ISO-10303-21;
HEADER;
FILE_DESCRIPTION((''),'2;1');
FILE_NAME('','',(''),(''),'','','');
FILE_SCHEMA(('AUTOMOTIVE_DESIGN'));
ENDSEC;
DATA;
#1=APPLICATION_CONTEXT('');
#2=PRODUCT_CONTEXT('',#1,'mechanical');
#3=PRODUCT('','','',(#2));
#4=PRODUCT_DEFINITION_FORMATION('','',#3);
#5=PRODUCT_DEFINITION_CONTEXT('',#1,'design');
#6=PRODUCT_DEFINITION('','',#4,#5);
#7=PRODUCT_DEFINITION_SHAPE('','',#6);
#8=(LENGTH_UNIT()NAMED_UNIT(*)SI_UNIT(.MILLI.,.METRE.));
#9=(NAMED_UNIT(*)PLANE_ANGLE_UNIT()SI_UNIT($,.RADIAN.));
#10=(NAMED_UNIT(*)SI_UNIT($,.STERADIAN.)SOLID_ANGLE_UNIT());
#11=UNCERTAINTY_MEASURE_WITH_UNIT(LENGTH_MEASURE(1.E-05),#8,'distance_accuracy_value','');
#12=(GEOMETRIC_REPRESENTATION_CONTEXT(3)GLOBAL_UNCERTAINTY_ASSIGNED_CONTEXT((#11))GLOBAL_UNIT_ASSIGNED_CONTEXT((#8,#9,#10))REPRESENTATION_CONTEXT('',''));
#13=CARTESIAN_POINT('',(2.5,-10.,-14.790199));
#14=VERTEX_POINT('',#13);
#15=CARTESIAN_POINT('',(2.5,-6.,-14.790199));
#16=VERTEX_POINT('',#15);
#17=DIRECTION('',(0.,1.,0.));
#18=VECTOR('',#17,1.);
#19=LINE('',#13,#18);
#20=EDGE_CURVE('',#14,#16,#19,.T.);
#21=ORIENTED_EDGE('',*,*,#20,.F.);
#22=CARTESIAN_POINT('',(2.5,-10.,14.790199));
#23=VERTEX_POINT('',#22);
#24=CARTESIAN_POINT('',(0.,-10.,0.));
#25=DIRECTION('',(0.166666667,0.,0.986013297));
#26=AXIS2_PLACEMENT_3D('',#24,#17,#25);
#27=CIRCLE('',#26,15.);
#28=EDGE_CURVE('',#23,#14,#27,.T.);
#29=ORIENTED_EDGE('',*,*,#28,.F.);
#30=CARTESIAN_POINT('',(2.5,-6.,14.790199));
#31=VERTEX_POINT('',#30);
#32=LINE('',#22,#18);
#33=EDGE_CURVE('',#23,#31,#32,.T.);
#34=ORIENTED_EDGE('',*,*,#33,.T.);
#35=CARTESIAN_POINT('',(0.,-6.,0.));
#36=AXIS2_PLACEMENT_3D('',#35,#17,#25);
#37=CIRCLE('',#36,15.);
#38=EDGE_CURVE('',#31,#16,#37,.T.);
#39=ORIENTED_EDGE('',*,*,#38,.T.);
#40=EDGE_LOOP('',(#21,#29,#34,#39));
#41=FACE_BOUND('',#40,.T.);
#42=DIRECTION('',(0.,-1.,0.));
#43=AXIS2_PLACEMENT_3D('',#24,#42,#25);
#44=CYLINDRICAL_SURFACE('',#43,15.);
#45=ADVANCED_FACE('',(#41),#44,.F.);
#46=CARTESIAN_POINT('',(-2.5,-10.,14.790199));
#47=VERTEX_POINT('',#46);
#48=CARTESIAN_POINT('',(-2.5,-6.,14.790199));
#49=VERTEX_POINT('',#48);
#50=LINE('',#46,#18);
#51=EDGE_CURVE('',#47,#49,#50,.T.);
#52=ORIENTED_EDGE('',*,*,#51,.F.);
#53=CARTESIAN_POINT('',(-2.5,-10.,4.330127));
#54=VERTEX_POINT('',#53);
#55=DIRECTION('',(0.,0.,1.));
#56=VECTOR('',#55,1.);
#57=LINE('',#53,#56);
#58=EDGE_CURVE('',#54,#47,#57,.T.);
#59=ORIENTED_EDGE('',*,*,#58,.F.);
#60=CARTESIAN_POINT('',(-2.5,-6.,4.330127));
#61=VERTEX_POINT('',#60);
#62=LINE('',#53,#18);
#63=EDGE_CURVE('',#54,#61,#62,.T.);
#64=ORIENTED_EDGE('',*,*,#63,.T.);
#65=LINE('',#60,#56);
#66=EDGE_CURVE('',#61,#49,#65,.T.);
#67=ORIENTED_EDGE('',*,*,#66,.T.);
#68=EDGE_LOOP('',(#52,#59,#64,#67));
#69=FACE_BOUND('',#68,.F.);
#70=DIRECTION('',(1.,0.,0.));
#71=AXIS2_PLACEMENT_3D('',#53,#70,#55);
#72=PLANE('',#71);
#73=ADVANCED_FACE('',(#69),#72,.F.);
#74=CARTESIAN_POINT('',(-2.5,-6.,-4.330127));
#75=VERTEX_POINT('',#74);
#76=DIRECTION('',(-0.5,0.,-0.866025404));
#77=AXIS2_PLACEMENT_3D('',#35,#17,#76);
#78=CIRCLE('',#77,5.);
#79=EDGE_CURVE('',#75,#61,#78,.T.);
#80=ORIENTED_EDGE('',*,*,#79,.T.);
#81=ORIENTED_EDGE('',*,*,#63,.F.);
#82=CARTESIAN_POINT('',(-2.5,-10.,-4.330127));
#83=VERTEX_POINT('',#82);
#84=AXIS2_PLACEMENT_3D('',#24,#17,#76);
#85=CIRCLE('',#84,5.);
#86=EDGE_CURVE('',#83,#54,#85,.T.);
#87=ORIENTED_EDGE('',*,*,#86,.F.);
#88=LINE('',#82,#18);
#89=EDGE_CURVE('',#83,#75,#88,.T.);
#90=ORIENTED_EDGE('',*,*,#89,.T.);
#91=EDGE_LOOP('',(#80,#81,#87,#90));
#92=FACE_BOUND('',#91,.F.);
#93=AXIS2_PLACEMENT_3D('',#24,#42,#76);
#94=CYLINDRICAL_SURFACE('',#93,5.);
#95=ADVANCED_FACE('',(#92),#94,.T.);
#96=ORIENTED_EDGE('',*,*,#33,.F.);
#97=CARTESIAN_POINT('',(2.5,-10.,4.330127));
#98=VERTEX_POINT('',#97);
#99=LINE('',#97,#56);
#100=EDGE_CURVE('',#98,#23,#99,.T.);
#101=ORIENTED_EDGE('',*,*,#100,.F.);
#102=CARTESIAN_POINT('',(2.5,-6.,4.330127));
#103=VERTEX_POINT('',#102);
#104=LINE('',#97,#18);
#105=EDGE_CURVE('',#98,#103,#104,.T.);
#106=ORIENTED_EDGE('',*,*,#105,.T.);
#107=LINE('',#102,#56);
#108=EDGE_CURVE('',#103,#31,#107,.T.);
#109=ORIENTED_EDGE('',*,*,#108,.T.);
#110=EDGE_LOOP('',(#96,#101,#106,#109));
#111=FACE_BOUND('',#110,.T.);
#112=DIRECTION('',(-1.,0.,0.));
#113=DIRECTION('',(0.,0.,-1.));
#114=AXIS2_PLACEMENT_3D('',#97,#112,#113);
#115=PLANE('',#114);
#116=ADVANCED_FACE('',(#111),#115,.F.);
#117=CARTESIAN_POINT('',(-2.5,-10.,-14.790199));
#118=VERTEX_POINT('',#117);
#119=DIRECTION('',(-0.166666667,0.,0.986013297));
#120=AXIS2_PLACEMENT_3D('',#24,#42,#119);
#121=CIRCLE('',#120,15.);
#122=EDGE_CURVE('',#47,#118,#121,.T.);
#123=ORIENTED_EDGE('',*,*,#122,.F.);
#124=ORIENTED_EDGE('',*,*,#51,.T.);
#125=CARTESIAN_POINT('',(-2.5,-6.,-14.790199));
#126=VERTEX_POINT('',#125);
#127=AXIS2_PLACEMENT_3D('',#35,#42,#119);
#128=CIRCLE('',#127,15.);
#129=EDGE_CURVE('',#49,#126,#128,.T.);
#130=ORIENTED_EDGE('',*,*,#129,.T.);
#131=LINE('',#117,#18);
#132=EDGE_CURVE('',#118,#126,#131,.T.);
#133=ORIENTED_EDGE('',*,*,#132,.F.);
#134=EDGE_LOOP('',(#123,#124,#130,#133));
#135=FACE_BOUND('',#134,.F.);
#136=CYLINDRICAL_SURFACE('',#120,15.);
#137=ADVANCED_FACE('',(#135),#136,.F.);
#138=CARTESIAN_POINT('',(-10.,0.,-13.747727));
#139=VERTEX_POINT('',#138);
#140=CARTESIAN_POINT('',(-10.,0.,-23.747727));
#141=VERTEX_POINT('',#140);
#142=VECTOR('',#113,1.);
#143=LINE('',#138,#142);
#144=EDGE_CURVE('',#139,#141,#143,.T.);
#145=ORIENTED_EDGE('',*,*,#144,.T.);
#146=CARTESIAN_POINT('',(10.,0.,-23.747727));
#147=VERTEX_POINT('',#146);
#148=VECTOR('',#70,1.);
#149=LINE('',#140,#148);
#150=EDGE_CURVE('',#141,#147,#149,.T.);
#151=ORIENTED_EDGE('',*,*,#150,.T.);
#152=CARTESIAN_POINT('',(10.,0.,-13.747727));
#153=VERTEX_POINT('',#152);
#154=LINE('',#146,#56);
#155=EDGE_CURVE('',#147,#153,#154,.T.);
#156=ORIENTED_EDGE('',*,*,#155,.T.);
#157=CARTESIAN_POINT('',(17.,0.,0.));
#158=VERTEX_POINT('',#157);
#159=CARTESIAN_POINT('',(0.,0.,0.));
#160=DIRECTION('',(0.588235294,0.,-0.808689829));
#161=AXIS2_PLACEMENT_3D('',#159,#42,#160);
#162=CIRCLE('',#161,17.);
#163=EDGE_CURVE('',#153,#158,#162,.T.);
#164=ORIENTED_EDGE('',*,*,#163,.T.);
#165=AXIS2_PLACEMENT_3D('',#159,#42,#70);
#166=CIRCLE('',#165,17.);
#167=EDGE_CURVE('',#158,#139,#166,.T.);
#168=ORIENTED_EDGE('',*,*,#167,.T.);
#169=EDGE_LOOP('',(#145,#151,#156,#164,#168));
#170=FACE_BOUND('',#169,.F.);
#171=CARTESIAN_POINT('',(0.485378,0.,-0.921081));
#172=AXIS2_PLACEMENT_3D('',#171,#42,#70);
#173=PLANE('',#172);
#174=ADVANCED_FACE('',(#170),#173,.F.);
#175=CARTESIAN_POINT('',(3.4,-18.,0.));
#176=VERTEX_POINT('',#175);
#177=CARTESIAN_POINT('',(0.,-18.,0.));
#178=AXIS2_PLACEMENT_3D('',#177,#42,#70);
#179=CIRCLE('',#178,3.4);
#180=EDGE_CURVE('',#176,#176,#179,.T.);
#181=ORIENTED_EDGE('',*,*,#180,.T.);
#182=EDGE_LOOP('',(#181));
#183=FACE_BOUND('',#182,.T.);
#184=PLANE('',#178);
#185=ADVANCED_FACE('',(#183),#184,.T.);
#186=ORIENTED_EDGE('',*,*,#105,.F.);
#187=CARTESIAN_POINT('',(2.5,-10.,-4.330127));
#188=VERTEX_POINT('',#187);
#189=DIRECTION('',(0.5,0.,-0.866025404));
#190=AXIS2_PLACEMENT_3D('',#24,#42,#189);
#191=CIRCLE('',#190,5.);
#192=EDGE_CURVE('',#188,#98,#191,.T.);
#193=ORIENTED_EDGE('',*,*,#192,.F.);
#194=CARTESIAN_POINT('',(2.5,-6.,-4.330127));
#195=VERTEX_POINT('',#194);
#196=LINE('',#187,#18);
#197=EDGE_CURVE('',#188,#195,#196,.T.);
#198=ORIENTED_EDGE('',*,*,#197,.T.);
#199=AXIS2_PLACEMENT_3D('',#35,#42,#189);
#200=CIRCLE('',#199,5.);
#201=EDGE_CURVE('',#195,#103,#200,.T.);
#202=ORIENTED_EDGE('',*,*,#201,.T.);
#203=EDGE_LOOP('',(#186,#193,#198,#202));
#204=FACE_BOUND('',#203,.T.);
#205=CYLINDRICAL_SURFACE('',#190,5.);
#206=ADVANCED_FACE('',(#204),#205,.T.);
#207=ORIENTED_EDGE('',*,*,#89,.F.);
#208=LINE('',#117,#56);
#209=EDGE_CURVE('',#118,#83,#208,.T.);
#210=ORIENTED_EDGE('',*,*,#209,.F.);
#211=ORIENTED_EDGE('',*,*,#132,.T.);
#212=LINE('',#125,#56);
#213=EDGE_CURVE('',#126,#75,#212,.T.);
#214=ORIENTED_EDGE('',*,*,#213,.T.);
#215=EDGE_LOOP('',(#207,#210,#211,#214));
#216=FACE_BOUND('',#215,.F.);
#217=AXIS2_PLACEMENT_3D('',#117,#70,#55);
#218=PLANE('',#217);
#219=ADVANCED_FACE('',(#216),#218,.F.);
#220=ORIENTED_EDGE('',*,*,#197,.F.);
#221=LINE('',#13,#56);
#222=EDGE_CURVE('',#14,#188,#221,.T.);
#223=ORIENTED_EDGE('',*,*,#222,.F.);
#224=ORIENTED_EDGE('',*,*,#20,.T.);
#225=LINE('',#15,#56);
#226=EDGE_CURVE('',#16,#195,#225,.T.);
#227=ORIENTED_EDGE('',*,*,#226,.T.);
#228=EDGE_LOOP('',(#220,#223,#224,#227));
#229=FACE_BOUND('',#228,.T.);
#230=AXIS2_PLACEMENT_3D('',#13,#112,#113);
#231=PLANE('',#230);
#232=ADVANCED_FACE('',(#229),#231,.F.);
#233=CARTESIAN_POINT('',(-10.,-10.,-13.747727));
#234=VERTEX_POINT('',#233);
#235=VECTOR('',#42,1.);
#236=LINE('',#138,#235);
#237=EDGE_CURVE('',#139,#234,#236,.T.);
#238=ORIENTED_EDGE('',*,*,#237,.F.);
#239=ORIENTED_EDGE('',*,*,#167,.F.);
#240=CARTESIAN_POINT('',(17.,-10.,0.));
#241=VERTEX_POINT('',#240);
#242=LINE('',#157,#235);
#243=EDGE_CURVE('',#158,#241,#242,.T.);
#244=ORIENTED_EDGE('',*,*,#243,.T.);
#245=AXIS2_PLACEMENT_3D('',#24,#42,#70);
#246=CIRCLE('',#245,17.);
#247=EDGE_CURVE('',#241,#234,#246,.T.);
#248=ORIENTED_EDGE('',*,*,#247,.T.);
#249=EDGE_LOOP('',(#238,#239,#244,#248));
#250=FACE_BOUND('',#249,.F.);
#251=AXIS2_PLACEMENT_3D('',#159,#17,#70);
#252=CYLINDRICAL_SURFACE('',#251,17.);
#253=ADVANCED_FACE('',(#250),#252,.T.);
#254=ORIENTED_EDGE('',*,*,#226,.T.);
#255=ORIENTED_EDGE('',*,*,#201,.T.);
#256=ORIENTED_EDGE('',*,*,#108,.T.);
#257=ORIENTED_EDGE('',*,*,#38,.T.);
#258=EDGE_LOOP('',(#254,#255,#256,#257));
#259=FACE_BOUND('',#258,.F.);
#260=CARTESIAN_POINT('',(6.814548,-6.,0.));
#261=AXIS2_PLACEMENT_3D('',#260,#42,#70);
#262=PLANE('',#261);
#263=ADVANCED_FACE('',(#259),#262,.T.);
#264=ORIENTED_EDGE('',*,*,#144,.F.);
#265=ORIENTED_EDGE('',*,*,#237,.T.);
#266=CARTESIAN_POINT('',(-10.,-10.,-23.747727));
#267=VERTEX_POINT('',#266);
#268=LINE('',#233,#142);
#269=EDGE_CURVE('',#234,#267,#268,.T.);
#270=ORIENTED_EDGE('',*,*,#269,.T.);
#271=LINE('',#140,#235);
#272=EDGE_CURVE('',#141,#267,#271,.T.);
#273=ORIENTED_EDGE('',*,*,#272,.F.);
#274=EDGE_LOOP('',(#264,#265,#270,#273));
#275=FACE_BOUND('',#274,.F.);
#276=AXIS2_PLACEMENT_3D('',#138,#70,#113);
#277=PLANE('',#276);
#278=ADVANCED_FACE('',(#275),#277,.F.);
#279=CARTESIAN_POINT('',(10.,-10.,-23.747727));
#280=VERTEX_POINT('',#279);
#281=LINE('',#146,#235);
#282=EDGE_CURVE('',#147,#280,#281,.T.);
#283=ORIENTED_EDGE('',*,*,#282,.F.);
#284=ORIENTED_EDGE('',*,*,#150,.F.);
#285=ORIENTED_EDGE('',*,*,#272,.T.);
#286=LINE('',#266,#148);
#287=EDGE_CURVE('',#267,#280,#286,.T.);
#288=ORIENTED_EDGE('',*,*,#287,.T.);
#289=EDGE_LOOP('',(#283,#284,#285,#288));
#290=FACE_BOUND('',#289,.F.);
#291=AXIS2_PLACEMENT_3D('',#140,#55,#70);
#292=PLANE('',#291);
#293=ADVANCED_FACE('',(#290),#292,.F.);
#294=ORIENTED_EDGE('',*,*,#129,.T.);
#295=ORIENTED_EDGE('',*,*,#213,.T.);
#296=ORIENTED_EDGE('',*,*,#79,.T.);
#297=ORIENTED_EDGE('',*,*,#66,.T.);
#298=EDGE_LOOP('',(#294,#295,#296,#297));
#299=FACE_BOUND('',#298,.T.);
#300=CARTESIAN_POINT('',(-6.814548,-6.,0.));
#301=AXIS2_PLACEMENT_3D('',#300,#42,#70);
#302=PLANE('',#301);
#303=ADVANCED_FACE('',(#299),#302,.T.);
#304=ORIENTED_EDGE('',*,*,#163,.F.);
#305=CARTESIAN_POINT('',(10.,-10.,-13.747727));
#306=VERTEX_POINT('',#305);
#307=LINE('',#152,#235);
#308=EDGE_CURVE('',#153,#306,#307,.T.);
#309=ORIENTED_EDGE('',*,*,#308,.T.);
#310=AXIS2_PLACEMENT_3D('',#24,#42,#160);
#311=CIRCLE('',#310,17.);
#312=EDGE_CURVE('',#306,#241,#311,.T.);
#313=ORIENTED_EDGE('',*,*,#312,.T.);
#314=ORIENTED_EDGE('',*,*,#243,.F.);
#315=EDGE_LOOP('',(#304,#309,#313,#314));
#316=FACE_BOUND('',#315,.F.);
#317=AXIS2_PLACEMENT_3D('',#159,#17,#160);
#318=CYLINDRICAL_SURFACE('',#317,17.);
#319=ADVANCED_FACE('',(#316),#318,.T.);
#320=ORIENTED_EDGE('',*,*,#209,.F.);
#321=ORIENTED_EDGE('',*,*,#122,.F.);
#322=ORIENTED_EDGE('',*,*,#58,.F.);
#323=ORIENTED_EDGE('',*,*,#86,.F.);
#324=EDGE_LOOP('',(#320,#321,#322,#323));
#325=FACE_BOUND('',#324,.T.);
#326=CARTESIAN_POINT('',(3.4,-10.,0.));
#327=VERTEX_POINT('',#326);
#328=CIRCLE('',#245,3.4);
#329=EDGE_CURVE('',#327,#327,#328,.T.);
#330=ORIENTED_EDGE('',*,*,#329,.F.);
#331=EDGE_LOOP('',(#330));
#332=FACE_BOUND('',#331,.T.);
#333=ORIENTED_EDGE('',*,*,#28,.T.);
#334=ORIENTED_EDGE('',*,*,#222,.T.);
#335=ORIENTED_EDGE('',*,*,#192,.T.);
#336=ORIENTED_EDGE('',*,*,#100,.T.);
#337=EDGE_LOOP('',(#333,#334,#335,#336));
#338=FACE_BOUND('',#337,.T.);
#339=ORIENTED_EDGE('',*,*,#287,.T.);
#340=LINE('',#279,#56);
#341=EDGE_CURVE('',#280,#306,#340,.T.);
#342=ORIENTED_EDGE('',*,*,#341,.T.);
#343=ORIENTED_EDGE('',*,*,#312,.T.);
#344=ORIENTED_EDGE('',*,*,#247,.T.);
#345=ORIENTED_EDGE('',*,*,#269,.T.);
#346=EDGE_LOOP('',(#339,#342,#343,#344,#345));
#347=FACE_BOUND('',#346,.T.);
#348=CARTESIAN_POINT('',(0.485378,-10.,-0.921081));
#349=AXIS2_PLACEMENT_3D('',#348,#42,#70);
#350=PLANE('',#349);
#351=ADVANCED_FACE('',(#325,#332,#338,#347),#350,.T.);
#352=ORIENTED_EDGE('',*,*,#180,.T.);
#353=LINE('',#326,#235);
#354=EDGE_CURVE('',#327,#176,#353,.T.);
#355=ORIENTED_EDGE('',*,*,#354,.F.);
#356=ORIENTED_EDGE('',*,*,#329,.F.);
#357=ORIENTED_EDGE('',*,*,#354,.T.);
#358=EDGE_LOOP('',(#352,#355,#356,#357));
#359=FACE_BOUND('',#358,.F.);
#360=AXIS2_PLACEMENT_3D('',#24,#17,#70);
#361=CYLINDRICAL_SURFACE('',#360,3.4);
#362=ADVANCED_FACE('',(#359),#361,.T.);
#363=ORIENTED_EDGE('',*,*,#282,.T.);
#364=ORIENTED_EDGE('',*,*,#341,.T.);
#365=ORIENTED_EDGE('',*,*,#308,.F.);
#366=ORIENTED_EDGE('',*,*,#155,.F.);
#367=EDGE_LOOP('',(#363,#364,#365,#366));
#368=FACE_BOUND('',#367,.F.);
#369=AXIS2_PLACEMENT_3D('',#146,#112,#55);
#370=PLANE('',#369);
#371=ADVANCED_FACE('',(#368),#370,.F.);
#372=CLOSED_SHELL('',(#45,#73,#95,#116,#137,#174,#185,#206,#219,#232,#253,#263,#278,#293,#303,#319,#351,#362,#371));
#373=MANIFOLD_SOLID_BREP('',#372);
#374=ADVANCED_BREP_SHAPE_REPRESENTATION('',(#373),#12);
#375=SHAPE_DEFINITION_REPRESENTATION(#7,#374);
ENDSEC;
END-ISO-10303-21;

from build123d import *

# Parameters (mm, degrees)
F1_DEPTH = 10
F3_DEPTH = 4
F4_R     = 3.4
F5_DEPTH = 8


# Not quite as in the source:
# - a feature of the source that left no trace in its solid (it failed there, or was rolled back) is left out
# - a pattern or mirror of a feature is missing from the dataset's text; its kind, count and spacing are read off the source's solid


with BuildPart() as f1:
    # F0 (on Front) → F1 (new body)
    with BuildSketch(Plane.XZ):
        with BuildLine():
            ThreePointArc((10, -13.7477270849), (15.1492574075, -7.7136243103), (17, 0))
            ThreePointArc((17, 0), (-7.7136243103, 15.1492574075), (-10, -13.7477270849))
            ThreePointArc((-10, -13.7477270849), (0, -17), (10, -13.7477270849))
        make_face()
        with BuildLine():
            ThreePointArc((10, -13.7477270849), (0, -17), (-10, -13.7477270849))
            Line((-10, -13.7477270849), (-10, -23.7477270849))
            Line((-10, -23.7477270849), (10, -23.7477270849))
            Line((10, -23.7477270849), (10, -13.7477270849))
        make_face()
    extrude(amount=F1_DEPTH)

    # F2 (on face) → F3 (cut)
    with BuildSketch(Plane.XZ.offset(10)):
        with BuildLine():
            Line((-2.5, 4.3301270189), (-2.5, 14.7901994577))
            ThreePointArc((-2.5, 14.7901994577), (-15, 0), (-2.5, -14.7901994577))
            Line((-2.5, -14.7901994577), (-2.5, -4.3301270189))
            ThreePointArc((-2.5, -4.3301270189), (-5, 0), (-2.5, 4.3301270189))
        make_face()
    f3 = extrude(amount=-F3_DEPTH, mode=Mode.SUBTRACT)

    # F3_copies: F3 across plane
    add(f3.mirror(Plane(origin=(0, 0, 0), x_dir=(0, 0, 1), z_dir=(1, 0, 0))), mode=Mode.SUBTRACT)

    # F4 (on face) → F5 (join)
    with BuildSketch(Plane.XZ.offset(10)):
        Circle(F4_R)
    extrude(amount=F5_DEPTH)


solid = f1.part
